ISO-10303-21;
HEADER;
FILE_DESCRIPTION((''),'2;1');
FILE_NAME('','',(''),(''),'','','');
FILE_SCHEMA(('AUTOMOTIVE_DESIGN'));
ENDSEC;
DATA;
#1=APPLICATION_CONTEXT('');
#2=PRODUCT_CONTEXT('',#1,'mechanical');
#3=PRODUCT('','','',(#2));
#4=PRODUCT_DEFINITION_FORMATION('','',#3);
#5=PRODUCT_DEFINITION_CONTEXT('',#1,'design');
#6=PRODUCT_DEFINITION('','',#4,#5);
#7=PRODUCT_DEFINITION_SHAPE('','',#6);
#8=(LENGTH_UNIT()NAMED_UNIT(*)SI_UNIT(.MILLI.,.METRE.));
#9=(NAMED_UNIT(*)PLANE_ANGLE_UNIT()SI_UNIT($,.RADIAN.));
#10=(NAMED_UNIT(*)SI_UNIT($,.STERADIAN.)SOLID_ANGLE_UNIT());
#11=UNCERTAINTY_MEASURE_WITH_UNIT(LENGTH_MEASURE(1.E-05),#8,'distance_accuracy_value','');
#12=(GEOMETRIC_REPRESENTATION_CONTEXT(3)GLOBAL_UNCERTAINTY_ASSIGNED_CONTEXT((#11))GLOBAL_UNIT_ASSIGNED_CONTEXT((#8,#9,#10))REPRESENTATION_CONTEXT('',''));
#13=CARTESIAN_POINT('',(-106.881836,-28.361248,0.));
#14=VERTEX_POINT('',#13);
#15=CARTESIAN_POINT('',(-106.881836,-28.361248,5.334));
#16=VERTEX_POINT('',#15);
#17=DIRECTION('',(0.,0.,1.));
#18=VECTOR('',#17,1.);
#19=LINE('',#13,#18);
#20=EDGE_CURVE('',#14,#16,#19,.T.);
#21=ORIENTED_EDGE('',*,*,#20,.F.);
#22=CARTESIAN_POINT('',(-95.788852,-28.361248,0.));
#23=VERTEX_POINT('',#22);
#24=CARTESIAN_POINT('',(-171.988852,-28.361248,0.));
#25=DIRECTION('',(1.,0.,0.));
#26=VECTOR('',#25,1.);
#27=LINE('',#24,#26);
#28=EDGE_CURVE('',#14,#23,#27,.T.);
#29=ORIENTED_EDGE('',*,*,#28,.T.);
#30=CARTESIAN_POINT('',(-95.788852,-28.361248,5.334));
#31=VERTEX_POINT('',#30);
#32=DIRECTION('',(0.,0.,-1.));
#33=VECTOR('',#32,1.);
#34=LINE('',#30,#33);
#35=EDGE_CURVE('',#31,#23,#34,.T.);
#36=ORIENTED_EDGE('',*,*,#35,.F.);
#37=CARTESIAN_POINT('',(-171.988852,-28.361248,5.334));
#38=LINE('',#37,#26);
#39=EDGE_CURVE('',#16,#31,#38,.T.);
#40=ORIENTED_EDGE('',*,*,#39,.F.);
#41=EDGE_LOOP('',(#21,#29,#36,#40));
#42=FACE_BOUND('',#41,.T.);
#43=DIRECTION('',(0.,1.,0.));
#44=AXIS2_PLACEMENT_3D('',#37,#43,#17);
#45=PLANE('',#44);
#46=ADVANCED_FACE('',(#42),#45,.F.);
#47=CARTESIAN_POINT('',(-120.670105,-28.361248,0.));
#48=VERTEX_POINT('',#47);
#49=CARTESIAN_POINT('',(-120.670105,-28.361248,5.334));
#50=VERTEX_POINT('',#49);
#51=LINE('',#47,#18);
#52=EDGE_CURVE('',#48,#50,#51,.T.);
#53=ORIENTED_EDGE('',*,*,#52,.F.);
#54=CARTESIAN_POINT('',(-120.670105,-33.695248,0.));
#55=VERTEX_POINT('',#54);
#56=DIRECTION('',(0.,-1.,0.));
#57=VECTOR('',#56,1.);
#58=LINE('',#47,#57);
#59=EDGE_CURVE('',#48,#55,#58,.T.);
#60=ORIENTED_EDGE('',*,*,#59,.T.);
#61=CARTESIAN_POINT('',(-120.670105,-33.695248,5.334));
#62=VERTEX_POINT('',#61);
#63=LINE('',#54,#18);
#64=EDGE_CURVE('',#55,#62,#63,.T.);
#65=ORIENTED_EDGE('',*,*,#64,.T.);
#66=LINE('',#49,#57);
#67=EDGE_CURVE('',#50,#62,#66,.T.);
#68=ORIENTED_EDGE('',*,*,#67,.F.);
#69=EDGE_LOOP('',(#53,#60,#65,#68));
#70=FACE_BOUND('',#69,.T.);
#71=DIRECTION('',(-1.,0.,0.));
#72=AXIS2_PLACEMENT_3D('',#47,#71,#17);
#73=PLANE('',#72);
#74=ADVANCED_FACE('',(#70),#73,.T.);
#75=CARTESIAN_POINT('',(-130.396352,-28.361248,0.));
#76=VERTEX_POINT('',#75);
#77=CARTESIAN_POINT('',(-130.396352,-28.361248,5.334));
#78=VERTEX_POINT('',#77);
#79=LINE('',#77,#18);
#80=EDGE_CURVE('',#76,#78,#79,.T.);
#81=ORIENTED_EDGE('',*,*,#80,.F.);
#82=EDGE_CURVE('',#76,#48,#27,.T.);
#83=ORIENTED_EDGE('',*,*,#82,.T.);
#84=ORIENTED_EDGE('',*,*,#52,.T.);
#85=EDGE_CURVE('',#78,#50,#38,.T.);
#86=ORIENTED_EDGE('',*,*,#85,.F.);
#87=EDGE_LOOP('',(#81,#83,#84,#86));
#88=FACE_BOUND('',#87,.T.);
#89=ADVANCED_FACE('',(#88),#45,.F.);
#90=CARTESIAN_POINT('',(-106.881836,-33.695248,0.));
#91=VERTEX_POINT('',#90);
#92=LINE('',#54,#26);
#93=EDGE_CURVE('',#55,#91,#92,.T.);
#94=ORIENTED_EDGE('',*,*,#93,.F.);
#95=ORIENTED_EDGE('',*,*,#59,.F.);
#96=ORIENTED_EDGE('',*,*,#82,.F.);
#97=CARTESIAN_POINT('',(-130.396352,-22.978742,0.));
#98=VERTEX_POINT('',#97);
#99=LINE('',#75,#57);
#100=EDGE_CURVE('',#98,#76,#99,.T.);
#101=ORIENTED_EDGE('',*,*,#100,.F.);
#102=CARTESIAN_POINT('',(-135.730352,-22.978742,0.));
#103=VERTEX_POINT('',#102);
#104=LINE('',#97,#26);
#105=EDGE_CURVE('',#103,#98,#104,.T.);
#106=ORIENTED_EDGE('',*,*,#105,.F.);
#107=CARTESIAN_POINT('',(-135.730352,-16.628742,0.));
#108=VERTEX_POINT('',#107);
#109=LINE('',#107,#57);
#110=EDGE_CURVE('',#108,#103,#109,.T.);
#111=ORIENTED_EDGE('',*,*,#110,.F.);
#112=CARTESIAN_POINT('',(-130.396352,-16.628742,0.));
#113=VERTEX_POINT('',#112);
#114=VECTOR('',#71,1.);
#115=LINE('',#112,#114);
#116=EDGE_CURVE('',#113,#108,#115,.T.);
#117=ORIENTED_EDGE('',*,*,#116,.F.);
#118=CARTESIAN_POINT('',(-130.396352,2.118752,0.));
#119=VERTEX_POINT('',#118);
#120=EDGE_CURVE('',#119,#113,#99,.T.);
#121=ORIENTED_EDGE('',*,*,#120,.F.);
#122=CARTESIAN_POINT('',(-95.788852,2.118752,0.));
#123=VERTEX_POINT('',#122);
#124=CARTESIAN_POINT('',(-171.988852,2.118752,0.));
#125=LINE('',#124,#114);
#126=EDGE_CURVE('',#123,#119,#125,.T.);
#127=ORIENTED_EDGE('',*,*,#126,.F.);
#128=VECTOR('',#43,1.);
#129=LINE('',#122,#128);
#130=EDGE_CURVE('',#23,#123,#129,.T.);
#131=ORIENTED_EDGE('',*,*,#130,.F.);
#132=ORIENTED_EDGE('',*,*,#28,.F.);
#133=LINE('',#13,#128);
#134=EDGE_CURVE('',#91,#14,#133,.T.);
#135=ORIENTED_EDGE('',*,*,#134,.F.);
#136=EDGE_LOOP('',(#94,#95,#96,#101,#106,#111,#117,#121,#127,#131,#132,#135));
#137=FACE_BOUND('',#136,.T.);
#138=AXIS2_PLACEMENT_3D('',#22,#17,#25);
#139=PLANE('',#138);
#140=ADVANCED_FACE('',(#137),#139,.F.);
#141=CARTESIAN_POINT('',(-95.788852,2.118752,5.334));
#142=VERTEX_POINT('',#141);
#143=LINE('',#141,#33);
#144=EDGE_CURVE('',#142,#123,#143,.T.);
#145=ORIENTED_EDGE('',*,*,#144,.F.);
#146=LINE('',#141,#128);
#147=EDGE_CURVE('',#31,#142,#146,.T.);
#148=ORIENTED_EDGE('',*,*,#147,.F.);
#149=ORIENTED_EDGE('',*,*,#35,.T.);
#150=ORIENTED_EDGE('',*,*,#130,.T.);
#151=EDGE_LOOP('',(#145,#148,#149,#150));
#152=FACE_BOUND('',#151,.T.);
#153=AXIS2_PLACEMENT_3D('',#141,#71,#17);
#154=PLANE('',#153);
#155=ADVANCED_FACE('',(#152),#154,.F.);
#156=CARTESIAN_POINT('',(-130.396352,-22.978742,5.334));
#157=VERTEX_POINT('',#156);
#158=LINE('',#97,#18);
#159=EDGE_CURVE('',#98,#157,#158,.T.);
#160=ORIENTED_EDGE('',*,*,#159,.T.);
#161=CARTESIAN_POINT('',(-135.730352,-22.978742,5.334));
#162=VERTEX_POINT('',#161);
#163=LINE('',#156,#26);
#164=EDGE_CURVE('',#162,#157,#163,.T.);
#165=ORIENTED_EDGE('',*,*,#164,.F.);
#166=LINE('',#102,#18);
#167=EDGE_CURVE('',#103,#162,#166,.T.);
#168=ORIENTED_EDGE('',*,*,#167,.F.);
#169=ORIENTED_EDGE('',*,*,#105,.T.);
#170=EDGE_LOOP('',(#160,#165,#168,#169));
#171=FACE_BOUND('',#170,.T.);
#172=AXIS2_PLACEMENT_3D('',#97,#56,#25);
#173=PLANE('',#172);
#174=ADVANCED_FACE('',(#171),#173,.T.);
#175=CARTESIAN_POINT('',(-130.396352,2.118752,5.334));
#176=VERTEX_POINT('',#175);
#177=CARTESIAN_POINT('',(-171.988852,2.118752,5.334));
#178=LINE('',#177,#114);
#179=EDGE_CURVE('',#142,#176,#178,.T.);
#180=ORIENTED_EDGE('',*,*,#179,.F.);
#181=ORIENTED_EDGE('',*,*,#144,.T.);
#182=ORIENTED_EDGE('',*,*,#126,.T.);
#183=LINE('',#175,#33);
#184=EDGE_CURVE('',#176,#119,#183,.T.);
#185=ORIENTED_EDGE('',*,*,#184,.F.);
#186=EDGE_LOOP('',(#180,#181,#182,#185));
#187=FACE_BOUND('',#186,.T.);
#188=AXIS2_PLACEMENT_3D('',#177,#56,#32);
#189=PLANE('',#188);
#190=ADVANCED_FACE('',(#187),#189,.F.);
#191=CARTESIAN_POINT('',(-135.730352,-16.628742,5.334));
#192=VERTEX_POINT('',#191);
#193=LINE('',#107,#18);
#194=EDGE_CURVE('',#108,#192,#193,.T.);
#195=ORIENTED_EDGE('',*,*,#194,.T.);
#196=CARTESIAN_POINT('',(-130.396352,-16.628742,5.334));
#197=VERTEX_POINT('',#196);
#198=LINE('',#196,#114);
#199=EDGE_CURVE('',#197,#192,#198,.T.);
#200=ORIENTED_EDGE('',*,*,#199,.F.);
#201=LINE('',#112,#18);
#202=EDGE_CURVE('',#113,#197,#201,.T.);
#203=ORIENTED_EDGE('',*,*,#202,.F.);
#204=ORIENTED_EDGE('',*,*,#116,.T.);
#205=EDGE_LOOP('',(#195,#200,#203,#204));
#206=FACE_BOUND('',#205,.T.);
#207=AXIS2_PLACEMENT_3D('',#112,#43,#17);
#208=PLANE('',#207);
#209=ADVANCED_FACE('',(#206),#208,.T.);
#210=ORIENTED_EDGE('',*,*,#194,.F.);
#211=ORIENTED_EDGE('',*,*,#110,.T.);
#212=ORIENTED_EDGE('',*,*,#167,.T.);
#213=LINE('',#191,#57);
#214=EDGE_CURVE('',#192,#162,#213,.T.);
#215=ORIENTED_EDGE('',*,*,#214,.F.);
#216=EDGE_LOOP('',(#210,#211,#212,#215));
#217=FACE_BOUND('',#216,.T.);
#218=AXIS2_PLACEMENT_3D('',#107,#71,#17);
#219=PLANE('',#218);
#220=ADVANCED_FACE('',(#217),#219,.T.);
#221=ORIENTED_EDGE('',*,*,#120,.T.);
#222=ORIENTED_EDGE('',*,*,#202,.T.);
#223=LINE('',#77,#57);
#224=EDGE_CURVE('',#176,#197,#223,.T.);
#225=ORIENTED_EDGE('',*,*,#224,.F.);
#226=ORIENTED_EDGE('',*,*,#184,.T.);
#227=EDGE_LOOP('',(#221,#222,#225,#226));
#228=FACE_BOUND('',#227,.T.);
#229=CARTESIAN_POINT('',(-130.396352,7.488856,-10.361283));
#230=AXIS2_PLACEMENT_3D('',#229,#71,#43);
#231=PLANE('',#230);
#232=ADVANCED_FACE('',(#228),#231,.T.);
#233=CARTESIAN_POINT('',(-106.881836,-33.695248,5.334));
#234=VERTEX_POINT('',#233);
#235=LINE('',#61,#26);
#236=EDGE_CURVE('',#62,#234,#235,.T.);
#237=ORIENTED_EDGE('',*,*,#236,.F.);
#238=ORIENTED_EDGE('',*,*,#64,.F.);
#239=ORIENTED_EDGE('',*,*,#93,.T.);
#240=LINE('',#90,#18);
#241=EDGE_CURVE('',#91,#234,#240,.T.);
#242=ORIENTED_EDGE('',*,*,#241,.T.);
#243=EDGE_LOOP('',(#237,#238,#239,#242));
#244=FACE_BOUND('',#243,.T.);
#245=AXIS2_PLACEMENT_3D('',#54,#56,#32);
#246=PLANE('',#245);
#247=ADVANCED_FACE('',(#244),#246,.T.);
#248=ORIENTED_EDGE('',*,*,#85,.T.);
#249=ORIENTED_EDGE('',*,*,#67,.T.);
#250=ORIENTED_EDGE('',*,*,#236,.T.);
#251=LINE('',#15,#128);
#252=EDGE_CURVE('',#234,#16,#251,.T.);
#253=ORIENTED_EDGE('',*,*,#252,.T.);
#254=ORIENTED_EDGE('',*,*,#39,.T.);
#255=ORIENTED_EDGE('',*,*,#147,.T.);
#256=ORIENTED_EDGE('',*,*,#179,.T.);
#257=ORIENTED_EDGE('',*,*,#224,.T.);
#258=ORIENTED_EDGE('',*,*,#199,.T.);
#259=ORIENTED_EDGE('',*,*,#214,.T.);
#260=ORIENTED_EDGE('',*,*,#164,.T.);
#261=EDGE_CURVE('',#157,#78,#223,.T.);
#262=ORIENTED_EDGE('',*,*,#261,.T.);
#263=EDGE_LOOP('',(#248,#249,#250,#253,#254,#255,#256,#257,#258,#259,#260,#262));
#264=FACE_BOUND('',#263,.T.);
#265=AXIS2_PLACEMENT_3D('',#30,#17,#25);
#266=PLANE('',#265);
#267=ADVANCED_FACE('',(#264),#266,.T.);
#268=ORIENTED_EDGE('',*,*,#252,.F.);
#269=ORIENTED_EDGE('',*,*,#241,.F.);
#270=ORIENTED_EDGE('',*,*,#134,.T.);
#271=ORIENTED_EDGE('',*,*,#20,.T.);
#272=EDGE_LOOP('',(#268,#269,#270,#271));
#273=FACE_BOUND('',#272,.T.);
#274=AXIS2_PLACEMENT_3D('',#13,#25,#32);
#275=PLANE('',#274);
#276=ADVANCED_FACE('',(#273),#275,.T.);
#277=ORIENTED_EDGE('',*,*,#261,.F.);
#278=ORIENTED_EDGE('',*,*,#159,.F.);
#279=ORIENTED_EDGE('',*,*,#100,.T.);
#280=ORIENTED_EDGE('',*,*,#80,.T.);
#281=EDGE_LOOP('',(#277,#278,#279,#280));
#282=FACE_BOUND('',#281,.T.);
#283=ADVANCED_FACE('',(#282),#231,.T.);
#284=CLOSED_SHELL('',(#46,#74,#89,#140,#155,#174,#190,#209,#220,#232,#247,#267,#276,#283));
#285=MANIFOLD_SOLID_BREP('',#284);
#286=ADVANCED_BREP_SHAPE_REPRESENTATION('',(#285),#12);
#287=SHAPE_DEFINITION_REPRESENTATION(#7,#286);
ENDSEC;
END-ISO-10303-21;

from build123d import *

# Parameters (mm, degrees)
SKETCH1_W           = 76.2
SKETCH1_H           = 30.48
BOSS_EXTRUDE1_DEPTH = 5.334
CAVITY1_START       = -171.988852232
CAVITY1_OUTLINE_W   = 30.48
CAVITY1_OUTLINE_H   = 5.334
CAVITY1_DEPTH       = 41.5925
SKETCH2_W           = 5.334
SKETCH2_H           = 6.35
BOSS_EXTRUDE2_DEPTH = 5.334
SKETCH3_W           = 13.788269566
SKETCH3_H           = 5.334
BOSS_EXTRUDE3_DEPTH = 5.334


# Read off the part's stored shape, not the designer's step: Cavity1
with BuildPart() as part:
    # Sketch1 → Boss-Extrude1 (new body)
    with BuildSketch(Plane.XY):
        with Locations((-133.888852232, -13.121247947)):
            Rectangle(SKETCH1_W, SKETCH1_H)
    extrude(amount=BOSS_EXTRUDE1_DEPTH)

    # Cavity1 outline → Cavity1 (cut)
    with BuildSketch(Plane.YZ.offset(CAVITY1_START)):
        with Locations((-13.121247947, 2.667)):
            Rectangle(CAVITY1_OUTLINE_W, CAVITY1_OUTLINE_H)
    extrude(amount=CAVITY1_DEPTH, mode=Mode.SUBTRACT)

    # Sketch2 → Boss-Extrude2 (add)
    with BuildSketch(Plane.XY.offset(5.334)):
        with Locations((-133.063352232, -19.80374181)):
            Rectangle(SKETCH2_W, SKETCH2_H)
    extrude(amount=-BOSS_EXTRUDE2_DEPTH)

    # Sketch3 → Boss-Extrude3 (add)
    with BuildSketch(Plane.XY.offset(5.334)):
        with Locations((-113.775970546, -31.028247947)):
            Rectangle(SKETCH3_W, SKETCH3_H)
    extrude(amount=-BOSS_EXTRUDE3_DEPTH)


solid = part.part
